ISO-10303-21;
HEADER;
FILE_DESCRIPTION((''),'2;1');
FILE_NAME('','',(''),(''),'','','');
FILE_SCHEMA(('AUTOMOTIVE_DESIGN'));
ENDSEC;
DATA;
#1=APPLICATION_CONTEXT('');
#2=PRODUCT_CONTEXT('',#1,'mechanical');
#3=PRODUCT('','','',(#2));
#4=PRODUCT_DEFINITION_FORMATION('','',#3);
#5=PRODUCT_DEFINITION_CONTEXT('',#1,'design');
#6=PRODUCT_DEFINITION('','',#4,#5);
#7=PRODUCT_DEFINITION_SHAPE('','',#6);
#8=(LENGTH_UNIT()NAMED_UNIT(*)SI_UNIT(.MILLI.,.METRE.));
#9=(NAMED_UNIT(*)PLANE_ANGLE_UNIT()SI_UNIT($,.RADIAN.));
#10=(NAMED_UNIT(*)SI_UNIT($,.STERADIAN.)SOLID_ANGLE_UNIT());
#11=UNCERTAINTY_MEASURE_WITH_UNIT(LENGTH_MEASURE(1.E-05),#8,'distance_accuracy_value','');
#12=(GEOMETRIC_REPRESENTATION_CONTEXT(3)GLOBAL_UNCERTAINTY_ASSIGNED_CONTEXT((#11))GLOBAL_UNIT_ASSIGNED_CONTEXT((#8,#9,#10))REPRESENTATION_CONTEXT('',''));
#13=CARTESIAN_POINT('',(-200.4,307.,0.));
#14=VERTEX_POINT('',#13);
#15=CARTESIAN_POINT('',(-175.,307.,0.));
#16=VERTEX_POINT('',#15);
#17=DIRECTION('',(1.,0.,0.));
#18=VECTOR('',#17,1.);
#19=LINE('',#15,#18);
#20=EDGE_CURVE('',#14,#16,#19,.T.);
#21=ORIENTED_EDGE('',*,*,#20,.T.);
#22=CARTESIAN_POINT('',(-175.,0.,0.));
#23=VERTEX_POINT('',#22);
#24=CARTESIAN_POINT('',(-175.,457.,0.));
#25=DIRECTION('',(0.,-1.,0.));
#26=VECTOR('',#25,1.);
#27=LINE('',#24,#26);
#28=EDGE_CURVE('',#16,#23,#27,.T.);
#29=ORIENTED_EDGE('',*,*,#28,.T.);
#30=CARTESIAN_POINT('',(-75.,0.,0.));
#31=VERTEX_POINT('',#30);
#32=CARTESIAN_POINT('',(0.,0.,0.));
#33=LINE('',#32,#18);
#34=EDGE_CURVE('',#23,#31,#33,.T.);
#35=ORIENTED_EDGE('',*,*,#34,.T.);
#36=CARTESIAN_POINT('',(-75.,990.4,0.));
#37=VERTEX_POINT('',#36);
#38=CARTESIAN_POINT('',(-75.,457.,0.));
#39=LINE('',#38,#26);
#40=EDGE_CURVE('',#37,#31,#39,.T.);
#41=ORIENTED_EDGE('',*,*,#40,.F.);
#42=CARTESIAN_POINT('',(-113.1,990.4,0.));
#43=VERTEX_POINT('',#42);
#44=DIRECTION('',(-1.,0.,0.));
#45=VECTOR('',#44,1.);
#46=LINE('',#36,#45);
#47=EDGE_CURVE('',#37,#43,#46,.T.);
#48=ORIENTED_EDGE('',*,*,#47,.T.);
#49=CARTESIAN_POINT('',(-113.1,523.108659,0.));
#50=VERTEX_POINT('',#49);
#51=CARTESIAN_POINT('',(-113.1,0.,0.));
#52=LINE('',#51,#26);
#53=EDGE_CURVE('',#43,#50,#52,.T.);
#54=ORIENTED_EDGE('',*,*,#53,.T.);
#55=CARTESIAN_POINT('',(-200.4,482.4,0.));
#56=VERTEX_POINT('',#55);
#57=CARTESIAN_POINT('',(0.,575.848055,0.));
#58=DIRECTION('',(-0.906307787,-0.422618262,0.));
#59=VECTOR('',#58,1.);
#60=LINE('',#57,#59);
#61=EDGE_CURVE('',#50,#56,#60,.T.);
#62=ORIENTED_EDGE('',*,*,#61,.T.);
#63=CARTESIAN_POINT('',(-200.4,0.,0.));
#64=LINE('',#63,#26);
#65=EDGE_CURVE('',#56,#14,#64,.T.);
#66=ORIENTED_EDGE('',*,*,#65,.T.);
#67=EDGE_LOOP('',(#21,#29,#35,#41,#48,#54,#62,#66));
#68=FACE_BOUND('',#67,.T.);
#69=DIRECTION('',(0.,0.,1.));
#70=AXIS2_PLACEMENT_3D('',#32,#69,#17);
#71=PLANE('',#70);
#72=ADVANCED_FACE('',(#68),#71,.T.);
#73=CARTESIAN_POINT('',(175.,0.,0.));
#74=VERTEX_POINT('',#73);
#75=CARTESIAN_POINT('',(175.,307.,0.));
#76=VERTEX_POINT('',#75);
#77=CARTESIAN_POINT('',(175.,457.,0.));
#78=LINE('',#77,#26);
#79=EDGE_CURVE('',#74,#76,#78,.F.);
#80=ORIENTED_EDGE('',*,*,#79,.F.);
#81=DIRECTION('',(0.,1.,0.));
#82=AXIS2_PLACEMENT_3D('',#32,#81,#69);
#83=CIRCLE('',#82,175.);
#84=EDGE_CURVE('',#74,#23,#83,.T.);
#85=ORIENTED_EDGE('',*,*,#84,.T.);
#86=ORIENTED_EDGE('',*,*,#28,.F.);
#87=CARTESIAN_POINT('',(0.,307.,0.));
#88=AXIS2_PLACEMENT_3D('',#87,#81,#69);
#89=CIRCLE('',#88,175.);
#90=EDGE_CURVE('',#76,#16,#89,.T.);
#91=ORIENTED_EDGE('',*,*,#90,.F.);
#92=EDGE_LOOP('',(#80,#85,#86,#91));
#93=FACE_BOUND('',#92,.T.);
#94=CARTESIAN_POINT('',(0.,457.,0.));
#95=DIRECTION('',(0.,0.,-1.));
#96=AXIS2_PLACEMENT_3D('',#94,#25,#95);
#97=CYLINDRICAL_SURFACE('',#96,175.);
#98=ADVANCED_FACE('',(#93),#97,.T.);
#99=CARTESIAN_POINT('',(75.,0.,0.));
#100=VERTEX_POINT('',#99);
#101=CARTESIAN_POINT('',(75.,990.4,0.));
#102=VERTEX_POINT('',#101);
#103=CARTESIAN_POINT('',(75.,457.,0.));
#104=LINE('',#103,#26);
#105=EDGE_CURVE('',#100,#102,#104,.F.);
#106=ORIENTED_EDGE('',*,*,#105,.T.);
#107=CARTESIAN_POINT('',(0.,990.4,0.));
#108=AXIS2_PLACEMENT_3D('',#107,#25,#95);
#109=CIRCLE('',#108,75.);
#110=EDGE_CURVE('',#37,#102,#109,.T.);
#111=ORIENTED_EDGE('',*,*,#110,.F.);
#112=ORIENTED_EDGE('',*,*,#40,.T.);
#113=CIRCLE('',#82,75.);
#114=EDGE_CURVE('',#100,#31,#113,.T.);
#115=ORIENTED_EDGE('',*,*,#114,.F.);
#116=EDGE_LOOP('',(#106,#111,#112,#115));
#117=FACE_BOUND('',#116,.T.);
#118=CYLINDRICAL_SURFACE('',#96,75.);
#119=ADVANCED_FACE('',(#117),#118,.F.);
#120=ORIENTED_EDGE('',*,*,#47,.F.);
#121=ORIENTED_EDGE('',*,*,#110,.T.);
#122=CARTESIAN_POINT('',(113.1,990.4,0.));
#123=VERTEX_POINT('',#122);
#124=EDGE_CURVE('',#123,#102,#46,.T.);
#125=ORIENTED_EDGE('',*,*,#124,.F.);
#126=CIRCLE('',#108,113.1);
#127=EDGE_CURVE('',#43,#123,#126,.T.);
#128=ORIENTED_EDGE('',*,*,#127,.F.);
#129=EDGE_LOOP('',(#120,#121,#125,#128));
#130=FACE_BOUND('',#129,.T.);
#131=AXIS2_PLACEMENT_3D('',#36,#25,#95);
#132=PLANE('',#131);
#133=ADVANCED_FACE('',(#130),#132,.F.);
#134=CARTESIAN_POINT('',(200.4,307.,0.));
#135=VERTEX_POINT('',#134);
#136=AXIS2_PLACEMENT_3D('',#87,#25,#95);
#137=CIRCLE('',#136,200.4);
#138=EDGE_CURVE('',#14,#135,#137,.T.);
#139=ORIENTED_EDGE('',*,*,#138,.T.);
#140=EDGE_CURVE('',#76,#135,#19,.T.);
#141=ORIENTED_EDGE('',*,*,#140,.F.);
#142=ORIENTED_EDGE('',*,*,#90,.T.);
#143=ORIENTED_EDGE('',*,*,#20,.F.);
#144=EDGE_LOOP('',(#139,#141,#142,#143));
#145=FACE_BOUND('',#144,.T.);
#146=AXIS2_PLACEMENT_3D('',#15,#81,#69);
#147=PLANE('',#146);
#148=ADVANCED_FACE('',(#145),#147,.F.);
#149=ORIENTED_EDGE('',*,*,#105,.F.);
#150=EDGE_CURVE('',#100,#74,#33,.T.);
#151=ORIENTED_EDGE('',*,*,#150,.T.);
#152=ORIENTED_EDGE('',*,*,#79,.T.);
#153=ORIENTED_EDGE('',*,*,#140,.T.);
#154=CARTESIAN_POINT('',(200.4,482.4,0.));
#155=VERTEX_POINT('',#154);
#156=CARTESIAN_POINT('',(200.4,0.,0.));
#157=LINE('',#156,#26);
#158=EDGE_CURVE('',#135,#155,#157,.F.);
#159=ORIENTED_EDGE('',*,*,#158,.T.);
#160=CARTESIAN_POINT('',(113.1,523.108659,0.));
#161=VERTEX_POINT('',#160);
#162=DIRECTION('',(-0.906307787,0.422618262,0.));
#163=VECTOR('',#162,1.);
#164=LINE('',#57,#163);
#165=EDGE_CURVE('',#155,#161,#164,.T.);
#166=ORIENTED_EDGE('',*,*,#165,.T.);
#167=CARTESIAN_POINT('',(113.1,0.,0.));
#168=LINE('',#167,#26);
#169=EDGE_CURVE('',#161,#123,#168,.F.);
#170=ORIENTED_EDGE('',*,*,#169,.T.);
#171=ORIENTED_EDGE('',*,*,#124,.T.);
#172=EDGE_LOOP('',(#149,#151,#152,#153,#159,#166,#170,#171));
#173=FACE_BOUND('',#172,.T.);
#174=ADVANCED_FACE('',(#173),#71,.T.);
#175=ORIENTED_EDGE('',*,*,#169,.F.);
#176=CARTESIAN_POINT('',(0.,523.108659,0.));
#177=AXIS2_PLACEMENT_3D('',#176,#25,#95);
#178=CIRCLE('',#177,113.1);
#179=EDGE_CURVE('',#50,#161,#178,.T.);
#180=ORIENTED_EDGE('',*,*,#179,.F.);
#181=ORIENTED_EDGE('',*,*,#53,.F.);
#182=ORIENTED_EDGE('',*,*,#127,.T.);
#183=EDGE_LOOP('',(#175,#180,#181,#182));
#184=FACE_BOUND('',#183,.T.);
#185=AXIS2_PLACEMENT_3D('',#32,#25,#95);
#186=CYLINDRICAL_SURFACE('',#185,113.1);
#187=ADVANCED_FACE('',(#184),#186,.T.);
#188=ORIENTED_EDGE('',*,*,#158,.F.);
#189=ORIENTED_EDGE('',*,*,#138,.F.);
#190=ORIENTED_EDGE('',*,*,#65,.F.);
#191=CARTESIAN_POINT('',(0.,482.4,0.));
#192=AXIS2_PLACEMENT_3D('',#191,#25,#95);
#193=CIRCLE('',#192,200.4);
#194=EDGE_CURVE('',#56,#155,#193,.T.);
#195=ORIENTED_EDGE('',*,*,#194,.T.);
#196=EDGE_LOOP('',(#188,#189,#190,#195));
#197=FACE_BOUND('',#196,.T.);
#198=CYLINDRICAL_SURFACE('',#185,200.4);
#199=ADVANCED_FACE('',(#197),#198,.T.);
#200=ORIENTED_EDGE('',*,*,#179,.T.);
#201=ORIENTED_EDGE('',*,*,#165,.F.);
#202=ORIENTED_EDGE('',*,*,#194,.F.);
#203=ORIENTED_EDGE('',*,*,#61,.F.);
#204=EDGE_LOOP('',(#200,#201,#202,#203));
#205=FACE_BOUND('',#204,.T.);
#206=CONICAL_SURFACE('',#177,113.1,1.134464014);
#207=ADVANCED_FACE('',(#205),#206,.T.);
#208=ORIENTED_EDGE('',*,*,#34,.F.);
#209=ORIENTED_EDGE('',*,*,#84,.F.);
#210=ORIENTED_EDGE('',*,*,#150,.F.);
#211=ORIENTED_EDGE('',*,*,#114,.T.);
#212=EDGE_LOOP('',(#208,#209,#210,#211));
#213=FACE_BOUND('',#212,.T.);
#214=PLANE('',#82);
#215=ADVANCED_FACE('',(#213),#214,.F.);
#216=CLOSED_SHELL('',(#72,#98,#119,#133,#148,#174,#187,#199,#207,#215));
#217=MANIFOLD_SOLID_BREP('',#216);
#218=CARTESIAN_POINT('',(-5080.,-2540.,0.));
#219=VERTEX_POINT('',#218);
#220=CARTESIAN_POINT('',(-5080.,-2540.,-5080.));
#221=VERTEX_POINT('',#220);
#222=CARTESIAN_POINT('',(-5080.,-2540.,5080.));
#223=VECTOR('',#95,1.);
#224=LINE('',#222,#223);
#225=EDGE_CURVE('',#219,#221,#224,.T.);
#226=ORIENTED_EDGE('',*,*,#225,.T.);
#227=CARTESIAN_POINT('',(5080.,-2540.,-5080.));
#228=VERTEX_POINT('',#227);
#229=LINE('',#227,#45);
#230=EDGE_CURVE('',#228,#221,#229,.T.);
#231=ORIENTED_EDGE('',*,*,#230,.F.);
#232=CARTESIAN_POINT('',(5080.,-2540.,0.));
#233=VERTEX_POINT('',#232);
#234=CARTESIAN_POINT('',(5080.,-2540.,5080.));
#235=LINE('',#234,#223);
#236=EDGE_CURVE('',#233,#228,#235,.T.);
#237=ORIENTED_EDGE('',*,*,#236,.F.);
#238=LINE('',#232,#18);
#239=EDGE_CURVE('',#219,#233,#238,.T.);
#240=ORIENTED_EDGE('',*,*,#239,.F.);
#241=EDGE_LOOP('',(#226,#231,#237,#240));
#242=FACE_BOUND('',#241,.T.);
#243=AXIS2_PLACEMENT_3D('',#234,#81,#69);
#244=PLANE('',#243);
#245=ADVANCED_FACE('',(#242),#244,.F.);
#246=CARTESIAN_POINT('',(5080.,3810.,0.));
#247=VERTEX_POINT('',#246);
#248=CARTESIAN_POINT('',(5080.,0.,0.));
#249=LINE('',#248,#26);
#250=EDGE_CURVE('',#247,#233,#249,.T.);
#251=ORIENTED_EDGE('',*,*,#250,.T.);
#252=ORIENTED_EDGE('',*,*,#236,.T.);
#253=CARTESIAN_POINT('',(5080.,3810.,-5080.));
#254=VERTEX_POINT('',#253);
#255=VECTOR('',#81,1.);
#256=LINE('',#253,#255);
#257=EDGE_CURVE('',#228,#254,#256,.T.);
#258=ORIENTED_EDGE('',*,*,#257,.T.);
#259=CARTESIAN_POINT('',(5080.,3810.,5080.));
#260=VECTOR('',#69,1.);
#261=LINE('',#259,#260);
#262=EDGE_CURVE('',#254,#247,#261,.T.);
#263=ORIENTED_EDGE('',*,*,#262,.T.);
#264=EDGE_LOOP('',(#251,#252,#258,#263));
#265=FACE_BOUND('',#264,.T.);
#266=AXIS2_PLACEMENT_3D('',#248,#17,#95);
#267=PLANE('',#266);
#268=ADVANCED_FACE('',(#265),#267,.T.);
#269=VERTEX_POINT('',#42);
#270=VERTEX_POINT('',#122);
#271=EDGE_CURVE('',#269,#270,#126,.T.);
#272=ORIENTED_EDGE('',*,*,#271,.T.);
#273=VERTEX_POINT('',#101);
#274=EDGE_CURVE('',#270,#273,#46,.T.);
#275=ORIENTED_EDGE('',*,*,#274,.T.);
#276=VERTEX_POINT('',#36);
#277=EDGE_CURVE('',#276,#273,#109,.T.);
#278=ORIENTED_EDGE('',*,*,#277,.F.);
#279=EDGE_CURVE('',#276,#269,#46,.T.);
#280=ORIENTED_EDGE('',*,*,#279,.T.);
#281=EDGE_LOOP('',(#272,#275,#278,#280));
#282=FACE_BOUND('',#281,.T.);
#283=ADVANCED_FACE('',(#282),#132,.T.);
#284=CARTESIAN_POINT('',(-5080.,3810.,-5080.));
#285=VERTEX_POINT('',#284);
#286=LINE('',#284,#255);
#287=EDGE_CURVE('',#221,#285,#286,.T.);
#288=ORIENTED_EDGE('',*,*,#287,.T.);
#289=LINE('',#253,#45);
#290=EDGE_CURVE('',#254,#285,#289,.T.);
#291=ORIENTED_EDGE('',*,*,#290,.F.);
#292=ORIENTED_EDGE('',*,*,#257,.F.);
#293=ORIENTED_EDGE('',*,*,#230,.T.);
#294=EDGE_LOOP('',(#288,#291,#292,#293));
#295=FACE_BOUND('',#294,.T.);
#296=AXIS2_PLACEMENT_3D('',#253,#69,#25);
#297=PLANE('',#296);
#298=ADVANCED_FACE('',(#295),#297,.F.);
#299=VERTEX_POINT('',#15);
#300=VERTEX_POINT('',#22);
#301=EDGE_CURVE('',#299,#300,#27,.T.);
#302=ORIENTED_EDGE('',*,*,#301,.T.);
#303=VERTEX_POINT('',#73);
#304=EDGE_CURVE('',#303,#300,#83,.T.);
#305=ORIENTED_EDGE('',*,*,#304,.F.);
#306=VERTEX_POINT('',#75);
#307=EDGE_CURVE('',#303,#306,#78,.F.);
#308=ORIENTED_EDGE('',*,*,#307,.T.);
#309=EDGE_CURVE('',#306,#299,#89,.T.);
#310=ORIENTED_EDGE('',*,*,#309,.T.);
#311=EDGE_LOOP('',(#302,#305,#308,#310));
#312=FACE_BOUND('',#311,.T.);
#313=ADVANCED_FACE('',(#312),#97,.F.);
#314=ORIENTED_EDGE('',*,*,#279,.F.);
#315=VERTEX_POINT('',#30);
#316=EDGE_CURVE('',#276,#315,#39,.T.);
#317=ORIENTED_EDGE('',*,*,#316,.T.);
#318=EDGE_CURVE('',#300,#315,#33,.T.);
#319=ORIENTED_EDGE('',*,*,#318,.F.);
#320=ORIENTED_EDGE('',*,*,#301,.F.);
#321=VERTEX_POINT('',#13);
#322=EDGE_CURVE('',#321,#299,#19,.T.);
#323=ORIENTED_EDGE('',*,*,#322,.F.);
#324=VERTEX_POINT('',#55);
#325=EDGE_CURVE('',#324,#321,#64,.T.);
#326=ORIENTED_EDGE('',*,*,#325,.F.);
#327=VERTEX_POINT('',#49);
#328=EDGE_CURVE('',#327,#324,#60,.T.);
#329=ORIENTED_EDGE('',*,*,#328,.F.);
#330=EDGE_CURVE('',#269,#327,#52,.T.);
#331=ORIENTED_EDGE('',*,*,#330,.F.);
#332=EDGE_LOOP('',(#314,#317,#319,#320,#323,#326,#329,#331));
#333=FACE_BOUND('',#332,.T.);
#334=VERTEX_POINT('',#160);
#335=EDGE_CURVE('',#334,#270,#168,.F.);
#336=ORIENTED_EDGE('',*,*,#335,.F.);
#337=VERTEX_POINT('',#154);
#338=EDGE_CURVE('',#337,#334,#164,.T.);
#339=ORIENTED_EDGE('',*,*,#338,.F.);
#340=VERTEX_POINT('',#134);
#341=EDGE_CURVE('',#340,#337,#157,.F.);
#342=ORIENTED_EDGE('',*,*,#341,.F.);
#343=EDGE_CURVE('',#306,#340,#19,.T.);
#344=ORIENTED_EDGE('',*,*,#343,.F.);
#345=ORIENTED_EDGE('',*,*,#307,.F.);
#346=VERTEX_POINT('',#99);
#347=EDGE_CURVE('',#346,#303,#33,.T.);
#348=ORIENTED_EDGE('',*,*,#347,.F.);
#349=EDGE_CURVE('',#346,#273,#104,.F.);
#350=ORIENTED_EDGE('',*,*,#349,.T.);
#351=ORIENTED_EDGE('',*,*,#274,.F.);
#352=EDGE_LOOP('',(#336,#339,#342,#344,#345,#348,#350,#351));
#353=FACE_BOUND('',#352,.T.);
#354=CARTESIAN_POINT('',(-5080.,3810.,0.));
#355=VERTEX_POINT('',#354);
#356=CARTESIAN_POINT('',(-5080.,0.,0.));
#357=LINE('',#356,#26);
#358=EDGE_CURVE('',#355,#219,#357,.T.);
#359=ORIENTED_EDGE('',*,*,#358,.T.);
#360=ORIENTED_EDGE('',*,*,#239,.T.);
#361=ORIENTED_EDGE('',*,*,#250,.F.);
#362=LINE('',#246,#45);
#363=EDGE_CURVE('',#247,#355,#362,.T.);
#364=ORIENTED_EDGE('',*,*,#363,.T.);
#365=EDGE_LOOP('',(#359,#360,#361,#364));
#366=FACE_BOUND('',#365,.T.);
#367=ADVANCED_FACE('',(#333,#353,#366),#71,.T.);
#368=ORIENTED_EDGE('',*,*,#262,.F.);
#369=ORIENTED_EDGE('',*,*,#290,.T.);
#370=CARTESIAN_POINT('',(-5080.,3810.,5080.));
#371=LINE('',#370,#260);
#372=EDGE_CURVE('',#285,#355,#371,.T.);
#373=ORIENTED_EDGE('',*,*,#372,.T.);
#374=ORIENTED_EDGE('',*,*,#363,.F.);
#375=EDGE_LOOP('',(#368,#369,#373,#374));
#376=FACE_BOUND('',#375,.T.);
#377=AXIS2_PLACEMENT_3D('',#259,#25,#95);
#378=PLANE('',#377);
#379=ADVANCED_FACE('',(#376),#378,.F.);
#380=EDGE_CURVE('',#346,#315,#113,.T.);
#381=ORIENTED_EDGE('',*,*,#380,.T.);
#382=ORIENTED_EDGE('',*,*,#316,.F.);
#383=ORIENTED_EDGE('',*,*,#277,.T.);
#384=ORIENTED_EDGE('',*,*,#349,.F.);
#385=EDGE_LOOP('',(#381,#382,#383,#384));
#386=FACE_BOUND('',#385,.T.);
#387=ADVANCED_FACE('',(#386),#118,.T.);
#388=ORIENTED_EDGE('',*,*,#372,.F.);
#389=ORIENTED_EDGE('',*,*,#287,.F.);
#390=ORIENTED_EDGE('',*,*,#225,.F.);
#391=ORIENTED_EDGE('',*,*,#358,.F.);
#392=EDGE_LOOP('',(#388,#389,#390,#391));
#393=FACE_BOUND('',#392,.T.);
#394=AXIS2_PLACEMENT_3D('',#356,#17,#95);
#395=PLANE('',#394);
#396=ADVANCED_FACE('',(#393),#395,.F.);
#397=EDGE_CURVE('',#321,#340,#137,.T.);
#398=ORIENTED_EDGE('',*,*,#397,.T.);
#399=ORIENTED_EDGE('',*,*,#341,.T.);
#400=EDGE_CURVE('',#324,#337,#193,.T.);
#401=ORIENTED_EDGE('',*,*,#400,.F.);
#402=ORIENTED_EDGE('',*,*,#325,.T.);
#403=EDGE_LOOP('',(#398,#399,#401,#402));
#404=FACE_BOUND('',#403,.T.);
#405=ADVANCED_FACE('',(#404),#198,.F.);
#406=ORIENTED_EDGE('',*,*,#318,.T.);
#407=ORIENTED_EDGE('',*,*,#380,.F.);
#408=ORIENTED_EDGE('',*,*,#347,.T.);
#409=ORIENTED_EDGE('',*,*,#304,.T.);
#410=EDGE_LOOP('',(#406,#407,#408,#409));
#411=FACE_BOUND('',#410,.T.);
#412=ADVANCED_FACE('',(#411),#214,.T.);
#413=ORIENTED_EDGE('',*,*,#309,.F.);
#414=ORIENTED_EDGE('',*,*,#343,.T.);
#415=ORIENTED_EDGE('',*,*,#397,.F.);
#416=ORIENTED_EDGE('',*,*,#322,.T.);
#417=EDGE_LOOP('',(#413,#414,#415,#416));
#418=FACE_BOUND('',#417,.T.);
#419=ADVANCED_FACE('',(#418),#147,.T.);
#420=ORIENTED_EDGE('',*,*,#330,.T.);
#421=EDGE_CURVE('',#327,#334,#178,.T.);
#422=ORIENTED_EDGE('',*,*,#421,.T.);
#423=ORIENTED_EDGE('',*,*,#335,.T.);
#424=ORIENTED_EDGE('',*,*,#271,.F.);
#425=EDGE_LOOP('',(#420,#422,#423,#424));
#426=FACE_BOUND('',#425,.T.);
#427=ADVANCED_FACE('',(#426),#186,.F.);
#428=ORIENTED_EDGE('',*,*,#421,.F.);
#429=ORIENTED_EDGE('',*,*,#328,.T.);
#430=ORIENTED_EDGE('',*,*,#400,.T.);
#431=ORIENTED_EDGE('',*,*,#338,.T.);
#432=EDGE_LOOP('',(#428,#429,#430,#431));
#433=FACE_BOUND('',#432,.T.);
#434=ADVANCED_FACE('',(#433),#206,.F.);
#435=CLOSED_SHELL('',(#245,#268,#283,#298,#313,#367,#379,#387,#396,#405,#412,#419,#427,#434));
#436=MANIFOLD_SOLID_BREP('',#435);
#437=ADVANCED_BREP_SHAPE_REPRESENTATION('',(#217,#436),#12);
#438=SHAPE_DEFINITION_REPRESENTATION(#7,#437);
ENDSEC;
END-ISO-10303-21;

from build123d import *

# Parameters (mm, degrees)
SKETCH1_R           = 175
SKETCH1_R_2         = 75
BOSS_EXTRUDE1_DEPTH = 457
SKETCH3_W           = 10160
SKETCH3_H           = 6350
BOSS_EXTRUDE2_DEPTH = 5080
SKETCH4_W           = 13475.768327993
SKETCH4_H           = 8367.586519284
CUT_EXTRUDE1_DEPTH  = 8132.96778154


# Read off the part's stored shape, not the designer's step: Intersect1
with BuildPart() as part:
    # Sketch1 → Boss-Extrude1 (new body)
    with BuildSketch(Plane(origin=(0, 0, 0), x_dir=(1, 0, 0), z_dir=(0, 1, 0))):
        with Locations(Location((0, 0, 0), (0, 0, 270))):
            Circle(SKETCH1_R)
        with Locations(Location((0, 0, 0), (0, 0, 270))):
            Circle(SKETCH1_R_2, mode=Mode.SUBTRACT)
    extrude(amount=BOSS_EXTRUDE1_DEPTH)

    # Sketch2 → Revolve1 (revolve)
    with BuildSketch(Plane.XY, mode=Mode.PRIVATE) as revolve1_sk:
        Polygon((-175, 307), (-200.4, 307), (-200.4, 482.4), (-113.1, 523.108658557), (-113.1, 990.4), (-75, 990.4), (-75, 533.2), (-75, 457), (-175, 457), align=None)
    revolve(revolve1_sk.sketch.rotate(Axis((0, 0, 0), (0, 1, 0)), 270), axis=Axis((0, 0, 0), (0, 1, 0)))


with BuildPart() as body_2:
    # Sketch3 → Boss-Extrude2 (new, symmetric)
    with BuildSketch(Plane(origin=(0, 0, 0), x_dir=(0, 0, -1), z_dir=(1, 0, 0))):
        with Locations((0, 635)):
            Rectangle(SKETCH3_W, SKETCH3_H)
    extrude(amount=BOSS_EXTRUDE2_DEPTH, both=True)

    # Intersect1 outline → Intersect1 (revolve, cut)
    with BuildSketch(Plane.XY):
        Polygon((113.1, 990.4), (75, 990.4), (75, 0), (175, 0), (175, 307), (200.4, 307), (200.4, 482.4), (113.1, 523.108658557), align=None)
    revolve(axis=Axis((0, 0, 0), (0, 1, 0)), mode=Mode.SUBTRACT)


with BuildPart() as cut_extrude1_tool:
    # Sketch4 → Cut-Extrude1 (new, through all)
    with BuildSketch(Plane.XY):
        with Locations((454.179344916, 464.014834855)):
            Rectangle(SKETCH4_W, SKETCH4_H)
    extrude(amount=CUT_EXTRUDE1_DEPTH)


with BuildPart() as part_1:
    add(part.part)

    # Cut-Extrude1: cut by cut_extrude1_tool
    add(cut_extrude1_tool.part, mode=Mode.SUBTRACT)


with BuildPart() as body_2_1:
    add(body_2.part)

    # Cut-Extrude1: cut by cut_extrude1_tool
    add(cut_extrude1_tool.part, mode=Mode.SUBTRACT)


solid = Compound([part_1.part, body_2_1.part])
